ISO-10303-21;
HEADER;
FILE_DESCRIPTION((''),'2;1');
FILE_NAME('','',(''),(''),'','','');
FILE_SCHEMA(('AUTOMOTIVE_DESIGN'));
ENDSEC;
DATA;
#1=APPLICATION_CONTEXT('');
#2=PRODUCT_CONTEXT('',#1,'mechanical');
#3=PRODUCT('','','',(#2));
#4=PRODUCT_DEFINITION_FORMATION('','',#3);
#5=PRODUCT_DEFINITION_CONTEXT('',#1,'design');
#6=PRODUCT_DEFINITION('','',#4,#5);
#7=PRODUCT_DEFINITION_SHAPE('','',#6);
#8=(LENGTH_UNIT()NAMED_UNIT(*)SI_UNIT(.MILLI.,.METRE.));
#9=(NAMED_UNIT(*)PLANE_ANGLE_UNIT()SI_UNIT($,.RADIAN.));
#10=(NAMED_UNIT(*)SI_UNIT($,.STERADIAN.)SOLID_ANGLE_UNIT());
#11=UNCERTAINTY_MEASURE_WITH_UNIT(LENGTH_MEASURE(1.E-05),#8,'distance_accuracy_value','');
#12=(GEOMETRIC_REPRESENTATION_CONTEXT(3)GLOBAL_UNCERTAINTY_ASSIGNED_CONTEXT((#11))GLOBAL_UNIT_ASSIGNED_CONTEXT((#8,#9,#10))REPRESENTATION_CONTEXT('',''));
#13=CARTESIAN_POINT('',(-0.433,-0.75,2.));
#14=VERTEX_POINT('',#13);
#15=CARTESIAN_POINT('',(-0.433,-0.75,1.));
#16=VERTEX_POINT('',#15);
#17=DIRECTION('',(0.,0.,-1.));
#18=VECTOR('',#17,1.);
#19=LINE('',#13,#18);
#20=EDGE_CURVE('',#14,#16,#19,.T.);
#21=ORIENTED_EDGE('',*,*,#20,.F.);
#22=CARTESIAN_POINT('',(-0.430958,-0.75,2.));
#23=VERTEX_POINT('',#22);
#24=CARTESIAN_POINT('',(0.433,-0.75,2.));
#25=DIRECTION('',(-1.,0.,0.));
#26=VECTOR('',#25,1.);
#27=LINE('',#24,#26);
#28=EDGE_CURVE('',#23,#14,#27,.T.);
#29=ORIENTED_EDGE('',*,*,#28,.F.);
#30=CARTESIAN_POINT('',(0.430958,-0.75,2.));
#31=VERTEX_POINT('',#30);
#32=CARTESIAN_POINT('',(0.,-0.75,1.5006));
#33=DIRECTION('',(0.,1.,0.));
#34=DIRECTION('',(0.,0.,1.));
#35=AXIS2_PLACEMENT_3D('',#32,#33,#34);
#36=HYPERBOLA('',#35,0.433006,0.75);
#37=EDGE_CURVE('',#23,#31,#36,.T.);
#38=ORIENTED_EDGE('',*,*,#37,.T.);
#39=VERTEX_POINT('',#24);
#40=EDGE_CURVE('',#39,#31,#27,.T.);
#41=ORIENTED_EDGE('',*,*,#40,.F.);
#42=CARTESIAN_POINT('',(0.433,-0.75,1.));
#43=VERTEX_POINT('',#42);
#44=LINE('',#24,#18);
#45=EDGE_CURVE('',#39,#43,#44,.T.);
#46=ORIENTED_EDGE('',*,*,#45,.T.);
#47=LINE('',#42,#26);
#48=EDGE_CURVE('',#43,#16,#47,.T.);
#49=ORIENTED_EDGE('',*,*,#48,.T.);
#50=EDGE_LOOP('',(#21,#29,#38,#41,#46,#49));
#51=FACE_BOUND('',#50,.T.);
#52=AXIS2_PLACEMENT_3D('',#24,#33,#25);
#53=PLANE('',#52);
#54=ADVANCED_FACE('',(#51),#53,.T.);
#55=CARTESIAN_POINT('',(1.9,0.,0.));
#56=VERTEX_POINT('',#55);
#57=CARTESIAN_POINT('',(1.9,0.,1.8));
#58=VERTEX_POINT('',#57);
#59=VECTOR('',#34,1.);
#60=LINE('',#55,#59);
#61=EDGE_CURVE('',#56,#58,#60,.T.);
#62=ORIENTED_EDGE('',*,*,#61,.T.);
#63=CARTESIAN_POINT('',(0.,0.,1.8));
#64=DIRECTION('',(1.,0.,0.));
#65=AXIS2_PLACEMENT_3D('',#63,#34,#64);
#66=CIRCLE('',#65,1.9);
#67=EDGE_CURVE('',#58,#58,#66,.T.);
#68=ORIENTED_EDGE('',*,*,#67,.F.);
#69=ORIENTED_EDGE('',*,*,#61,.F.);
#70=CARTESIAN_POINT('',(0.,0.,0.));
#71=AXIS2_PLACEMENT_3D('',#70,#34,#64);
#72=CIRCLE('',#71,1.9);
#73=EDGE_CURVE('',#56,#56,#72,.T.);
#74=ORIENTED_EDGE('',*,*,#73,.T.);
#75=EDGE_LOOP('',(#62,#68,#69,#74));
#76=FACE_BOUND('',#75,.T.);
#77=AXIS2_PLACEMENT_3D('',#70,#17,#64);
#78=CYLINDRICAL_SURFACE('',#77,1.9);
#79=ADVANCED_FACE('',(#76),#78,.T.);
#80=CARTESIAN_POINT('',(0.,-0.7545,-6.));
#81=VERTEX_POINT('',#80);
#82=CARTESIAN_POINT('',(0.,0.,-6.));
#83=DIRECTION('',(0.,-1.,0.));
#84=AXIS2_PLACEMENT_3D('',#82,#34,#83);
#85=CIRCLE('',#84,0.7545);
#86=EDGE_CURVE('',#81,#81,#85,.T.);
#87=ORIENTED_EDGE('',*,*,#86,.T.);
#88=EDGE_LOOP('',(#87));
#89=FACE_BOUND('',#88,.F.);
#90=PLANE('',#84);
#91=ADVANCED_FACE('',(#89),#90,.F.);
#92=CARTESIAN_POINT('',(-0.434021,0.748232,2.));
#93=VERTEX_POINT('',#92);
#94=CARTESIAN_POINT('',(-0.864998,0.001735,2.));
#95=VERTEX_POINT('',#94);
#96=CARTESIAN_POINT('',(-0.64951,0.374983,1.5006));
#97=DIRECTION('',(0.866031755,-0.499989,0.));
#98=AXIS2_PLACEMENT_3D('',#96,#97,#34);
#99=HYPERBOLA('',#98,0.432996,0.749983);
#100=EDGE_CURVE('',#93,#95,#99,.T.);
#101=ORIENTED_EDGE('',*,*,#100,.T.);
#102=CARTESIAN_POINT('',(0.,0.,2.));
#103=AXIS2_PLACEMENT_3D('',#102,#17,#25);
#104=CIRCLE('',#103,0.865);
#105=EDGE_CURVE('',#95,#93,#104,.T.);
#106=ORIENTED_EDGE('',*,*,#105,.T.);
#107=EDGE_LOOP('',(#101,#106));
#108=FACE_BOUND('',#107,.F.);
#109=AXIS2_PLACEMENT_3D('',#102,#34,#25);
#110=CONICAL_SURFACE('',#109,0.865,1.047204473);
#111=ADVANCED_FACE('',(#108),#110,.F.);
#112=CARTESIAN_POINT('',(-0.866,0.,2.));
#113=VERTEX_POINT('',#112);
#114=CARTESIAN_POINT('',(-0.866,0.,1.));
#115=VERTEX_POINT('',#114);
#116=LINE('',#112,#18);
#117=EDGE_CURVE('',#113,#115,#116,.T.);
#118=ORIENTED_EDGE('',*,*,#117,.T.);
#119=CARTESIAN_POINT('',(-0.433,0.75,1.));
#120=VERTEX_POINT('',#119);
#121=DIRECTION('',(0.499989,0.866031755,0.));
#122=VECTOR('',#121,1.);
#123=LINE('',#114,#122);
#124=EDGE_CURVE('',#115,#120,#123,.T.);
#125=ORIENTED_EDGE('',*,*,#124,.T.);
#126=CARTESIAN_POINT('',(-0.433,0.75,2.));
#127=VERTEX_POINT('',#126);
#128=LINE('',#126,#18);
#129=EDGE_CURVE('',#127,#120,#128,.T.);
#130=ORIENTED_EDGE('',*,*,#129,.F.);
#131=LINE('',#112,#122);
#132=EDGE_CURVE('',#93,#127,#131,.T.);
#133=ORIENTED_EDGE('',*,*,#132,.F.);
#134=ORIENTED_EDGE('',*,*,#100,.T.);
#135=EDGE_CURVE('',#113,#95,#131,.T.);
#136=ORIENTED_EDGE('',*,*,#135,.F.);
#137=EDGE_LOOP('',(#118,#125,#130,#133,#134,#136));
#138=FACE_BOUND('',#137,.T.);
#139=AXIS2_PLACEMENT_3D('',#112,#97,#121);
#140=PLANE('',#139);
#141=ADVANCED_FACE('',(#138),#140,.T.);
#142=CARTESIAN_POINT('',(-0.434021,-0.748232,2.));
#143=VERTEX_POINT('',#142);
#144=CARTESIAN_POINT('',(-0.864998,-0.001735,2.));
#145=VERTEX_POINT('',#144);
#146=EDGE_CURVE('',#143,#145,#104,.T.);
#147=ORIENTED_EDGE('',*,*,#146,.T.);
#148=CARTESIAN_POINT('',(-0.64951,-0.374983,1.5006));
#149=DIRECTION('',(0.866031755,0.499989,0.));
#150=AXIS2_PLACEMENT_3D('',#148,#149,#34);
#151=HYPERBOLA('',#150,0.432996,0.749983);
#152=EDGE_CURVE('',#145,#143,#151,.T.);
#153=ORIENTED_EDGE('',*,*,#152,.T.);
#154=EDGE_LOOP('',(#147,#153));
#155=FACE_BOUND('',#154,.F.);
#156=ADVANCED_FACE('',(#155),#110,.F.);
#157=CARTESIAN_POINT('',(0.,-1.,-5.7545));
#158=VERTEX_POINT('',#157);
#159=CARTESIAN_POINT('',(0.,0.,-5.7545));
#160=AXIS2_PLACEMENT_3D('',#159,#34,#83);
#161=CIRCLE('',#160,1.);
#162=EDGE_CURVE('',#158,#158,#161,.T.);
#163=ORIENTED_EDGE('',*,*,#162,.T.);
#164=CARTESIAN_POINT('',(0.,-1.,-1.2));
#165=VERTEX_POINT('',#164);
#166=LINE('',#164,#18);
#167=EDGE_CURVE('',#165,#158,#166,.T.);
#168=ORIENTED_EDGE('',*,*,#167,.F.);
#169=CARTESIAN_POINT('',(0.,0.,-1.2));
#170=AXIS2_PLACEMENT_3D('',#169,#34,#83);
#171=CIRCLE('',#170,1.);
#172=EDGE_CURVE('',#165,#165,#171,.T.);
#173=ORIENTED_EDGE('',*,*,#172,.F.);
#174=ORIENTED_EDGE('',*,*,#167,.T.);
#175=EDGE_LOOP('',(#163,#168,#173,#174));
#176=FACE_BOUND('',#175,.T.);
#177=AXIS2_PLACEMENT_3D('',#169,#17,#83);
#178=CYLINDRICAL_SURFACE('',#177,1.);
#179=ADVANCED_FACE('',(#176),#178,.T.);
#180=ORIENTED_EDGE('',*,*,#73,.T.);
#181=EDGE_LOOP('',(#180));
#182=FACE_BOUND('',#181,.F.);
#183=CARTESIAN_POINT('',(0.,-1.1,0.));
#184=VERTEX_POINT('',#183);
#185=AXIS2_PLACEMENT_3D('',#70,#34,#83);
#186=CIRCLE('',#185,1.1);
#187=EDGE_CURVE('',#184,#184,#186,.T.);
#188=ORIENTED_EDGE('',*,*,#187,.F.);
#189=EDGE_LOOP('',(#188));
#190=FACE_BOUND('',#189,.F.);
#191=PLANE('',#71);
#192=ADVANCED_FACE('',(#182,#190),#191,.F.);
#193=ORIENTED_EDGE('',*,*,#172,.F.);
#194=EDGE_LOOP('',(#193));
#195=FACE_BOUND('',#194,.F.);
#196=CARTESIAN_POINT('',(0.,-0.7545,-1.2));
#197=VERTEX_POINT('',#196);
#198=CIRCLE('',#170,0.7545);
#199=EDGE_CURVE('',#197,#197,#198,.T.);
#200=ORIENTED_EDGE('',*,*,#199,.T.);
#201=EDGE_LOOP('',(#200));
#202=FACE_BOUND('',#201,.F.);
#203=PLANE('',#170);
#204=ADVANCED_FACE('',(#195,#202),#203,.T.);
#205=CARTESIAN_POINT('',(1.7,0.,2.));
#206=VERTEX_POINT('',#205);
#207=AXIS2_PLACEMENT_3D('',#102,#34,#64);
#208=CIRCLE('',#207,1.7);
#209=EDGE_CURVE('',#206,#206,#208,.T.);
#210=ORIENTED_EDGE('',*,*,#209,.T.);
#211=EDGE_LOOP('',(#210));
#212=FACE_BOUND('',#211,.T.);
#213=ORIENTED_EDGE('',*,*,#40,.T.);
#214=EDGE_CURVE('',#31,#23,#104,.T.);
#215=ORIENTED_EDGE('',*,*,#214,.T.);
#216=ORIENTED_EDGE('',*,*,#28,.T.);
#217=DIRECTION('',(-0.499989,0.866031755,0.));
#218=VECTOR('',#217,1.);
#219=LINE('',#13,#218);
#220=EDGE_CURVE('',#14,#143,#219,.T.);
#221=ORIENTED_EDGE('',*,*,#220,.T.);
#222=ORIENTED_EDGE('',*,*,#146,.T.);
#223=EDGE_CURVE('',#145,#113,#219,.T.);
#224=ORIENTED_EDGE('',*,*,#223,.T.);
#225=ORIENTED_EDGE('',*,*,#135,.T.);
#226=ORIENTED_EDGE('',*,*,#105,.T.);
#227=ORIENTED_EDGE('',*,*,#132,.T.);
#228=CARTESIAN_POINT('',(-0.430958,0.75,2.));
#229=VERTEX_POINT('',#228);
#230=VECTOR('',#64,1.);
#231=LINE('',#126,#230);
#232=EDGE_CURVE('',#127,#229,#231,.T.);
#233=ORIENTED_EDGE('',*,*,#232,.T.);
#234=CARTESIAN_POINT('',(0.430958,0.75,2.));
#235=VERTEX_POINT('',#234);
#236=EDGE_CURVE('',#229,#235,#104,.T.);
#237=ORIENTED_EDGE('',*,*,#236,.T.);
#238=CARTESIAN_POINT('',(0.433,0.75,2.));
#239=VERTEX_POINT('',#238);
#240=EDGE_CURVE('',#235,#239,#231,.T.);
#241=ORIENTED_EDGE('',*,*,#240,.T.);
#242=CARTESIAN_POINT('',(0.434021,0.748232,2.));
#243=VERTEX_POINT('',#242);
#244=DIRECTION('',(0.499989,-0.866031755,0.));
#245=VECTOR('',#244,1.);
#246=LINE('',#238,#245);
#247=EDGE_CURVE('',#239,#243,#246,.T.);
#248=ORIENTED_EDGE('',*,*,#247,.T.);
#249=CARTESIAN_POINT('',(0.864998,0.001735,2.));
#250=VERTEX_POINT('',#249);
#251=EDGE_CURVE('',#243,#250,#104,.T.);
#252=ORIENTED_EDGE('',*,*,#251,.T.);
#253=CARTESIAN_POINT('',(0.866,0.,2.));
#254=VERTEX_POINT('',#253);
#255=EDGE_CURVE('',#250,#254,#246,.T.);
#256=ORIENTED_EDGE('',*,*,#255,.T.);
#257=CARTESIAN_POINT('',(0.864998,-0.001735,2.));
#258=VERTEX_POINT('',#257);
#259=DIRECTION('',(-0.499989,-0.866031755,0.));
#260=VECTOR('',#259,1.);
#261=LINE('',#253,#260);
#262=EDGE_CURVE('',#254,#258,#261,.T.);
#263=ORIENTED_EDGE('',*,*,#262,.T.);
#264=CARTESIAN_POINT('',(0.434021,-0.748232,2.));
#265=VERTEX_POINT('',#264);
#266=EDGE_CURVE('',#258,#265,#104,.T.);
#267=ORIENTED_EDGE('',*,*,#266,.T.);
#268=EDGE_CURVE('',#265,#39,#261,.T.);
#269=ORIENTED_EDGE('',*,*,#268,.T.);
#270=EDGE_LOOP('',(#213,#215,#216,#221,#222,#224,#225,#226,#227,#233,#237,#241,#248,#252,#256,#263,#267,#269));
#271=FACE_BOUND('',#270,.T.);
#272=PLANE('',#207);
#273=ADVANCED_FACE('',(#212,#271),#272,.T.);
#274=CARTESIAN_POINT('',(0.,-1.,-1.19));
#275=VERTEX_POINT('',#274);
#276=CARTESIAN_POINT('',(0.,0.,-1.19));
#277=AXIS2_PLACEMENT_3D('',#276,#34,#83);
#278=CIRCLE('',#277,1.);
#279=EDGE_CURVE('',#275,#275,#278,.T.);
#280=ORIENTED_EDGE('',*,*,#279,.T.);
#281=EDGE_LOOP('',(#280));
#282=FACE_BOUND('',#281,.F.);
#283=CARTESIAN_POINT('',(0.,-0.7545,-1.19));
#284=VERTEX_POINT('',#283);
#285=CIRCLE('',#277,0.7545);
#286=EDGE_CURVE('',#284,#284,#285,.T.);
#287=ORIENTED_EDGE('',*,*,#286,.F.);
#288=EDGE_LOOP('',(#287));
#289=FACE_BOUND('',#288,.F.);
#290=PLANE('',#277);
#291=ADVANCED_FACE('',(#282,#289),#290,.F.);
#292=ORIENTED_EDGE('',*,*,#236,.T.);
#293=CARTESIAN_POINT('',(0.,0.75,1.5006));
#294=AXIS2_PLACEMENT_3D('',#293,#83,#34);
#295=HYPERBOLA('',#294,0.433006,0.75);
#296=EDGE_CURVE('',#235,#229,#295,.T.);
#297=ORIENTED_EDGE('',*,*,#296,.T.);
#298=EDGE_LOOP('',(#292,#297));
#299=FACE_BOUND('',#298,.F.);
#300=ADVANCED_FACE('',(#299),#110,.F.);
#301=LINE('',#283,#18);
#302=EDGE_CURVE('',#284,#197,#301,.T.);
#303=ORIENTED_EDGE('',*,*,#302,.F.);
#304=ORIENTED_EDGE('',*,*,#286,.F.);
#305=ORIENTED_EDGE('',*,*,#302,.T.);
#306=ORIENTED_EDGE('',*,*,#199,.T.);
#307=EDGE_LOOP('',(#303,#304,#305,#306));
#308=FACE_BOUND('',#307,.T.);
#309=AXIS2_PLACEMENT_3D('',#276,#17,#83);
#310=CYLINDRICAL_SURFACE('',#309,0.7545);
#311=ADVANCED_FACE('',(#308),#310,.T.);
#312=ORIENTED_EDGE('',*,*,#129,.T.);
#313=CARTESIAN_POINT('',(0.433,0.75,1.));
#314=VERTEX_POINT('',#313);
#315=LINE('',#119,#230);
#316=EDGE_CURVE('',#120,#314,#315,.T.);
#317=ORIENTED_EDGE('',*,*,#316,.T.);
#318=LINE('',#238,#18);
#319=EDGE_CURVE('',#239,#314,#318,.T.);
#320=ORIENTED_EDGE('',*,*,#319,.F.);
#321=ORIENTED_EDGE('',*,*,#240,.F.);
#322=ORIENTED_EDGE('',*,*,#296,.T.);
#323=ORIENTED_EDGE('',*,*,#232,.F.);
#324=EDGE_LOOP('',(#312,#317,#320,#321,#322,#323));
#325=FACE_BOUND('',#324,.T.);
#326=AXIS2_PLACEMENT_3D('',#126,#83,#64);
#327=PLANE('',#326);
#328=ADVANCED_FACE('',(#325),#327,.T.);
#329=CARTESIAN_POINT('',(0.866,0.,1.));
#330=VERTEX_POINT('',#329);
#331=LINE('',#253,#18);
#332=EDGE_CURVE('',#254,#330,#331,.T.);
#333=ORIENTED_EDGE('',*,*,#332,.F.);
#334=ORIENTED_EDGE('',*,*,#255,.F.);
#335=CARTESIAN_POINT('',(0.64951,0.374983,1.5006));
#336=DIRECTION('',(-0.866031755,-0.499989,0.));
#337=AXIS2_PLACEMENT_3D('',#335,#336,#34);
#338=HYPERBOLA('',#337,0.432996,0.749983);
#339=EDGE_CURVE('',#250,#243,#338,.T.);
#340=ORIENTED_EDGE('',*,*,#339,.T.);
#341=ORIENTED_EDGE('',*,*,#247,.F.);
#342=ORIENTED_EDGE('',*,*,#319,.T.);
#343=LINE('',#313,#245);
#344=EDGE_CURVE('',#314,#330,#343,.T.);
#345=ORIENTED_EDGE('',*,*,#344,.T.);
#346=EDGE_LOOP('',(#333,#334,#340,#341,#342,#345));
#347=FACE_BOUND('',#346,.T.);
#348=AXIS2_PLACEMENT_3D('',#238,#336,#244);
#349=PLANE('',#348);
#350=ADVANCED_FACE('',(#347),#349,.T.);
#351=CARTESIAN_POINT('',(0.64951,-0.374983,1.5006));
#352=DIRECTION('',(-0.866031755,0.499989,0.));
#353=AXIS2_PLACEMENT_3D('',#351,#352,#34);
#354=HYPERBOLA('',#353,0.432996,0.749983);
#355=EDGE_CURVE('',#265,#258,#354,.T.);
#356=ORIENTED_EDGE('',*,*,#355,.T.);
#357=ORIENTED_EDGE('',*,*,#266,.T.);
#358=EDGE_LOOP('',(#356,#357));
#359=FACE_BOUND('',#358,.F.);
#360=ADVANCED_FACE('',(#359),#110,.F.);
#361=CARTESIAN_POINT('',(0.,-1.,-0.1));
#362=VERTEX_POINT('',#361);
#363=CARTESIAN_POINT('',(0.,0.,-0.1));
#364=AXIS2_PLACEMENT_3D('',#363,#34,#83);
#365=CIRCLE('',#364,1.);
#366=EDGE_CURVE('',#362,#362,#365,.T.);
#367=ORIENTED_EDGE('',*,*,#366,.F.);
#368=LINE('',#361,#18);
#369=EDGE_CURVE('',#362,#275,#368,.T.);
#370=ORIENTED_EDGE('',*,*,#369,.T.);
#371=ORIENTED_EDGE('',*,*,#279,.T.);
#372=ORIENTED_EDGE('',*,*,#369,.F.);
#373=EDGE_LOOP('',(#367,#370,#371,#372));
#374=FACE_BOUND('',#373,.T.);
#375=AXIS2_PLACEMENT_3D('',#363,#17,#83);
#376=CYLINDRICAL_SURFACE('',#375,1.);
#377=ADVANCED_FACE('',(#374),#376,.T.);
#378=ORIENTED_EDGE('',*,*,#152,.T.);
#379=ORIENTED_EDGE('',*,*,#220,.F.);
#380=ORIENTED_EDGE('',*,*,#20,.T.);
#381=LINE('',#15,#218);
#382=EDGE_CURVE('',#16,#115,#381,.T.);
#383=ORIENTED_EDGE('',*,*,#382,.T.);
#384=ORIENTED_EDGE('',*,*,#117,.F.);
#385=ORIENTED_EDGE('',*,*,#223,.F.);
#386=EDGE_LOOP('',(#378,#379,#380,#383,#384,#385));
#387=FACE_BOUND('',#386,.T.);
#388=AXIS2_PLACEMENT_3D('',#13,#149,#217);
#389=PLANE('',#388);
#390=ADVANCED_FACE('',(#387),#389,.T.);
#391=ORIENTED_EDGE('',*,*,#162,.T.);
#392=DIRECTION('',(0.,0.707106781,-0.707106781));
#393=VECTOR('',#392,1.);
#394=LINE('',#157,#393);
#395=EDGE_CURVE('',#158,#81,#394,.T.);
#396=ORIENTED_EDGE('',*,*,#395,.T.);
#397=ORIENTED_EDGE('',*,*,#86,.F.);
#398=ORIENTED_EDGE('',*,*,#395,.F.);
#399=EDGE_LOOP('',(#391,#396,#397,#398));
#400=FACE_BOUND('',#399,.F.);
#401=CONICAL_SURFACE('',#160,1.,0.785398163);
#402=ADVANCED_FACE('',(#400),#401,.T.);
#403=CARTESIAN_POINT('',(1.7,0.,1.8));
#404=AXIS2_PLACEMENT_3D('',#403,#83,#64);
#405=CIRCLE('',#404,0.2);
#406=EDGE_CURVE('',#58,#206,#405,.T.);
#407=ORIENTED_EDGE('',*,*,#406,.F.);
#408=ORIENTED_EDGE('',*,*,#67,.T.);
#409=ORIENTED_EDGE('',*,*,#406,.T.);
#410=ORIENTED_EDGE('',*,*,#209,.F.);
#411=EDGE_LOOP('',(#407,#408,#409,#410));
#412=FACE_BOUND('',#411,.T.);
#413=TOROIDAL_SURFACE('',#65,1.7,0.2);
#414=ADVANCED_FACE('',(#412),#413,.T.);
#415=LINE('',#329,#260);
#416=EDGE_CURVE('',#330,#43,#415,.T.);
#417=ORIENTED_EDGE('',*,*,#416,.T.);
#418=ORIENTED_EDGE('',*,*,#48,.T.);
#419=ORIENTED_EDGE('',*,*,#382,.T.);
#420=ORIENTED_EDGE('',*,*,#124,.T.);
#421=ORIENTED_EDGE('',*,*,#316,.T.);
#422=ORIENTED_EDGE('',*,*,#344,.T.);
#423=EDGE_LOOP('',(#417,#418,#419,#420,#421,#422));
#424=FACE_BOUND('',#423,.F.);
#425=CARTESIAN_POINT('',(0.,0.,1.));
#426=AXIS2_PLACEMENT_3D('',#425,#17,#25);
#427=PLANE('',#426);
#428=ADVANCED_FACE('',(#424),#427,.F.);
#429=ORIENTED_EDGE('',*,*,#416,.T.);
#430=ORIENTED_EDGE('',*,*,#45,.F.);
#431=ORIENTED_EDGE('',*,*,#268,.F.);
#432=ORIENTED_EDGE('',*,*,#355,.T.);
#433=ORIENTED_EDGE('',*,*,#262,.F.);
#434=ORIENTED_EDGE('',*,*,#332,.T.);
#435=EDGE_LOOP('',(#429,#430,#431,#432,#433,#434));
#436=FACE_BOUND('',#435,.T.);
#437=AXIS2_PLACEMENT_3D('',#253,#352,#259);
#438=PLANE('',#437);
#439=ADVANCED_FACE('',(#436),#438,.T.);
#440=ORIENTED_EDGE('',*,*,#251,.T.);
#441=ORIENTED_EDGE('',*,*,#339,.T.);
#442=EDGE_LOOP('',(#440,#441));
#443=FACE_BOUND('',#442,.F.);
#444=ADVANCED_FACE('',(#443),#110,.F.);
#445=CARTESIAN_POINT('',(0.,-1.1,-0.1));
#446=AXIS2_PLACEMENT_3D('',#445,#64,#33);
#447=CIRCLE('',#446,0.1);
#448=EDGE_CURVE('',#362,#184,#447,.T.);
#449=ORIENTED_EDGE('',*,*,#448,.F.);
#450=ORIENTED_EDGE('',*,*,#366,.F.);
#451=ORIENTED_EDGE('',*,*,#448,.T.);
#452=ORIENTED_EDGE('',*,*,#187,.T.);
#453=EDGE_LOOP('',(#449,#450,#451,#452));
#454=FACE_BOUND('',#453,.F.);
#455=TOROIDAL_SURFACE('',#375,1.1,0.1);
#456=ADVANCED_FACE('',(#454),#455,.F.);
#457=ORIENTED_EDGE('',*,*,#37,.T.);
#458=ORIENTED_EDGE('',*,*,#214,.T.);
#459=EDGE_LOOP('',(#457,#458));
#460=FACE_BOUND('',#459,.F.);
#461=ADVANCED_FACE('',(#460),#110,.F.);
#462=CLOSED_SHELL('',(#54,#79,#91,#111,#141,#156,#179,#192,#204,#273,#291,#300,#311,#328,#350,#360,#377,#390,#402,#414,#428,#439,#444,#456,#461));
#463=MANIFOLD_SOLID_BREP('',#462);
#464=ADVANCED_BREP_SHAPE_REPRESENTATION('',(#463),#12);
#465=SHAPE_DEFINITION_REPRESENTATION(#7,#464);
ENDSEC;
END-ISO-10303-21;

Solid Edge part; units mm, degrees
sketch "Sketch1" plane through (0, 0, 0) normal (0, 0, 1) x (1, 0, 0)
  circle A0 centre (0, 0) radius 1.9
extrude "Protrusion1" add sketch "Sketch1" along normal blind 2
sketch "Sketch2" plane through (0, 0, 2) normal (0, 0, 1) x (0, 1, 0)
  line L0 (0, 0.866) -> (0.75, 0.433)
  line L1 (0.75, 0.433) -> (0.75, -0.433)
  line L2 (0.75, -0.433) -> (0, -0.866)
  line L3 (0, -0.866) -> (-0.75, -0.433)
  line L4 (-0.75, -0.433) -> (-0.75, 0.433)
  line L5 (-0.75, 0.433) -> (0, 0.866)
extrude "Cutout1" cut sketch "Sketch2" against normal blind 1
fillet "Round1" radius 0.2 1 edges at (-1.9, 0, 2)
sketch "Sketch3" plane through (0, 0, 0) normal (1, 0, 0) x (0, 1, 0)
  line L0 (-0.7545, -6) -> (0, -6)
  line L1 (-1, -5.7545) -> (-0.7545, -6)
  line L2 (-1, -1.2) -> (-1, -5.7545)
  line L3 (-0.7545, -1.2) -> (-1, -1.2)
  line L4 (-0.7545, -1.19) -> (-0.7545, -1.2)
  line L5 (-1, -1.19) -> (-0.7545, -1.19)
  line L6 (-1, -0.1) -> (-1, -1.19)
  arc A0 (-1, -0.1) -> (-1.1, 0) centre (-1.1, -0.1) ccw
  dimension "D1" = 1.2
  dimension "D2" = 0.01
  dimension "D3" = 0.1
  dimension "D4" = 6
revolve "RevolvedProtrusion1" add sketch "Sketch3" angle 360 about axis through (0, 0, -60.325) along (0, 0, 1) material side at (0, -0.3772, -5.95)
cosmetic_thread "Thread1" size "M2"
sketch "Sketch4" plane through (0, 0, 0) normal (0, -1, 0) x (1, 0, 0)
  line L0 (-0.865, 2) -> (0, 1.5006)
revolve "RevolvedCutout1" cut sketch "Sketch4" angle 360 about axis through (0, 0, 57.15) along (0, 0, -1) material side at (-0.4075, 0, 1.7936)
properties material "Stahl"
